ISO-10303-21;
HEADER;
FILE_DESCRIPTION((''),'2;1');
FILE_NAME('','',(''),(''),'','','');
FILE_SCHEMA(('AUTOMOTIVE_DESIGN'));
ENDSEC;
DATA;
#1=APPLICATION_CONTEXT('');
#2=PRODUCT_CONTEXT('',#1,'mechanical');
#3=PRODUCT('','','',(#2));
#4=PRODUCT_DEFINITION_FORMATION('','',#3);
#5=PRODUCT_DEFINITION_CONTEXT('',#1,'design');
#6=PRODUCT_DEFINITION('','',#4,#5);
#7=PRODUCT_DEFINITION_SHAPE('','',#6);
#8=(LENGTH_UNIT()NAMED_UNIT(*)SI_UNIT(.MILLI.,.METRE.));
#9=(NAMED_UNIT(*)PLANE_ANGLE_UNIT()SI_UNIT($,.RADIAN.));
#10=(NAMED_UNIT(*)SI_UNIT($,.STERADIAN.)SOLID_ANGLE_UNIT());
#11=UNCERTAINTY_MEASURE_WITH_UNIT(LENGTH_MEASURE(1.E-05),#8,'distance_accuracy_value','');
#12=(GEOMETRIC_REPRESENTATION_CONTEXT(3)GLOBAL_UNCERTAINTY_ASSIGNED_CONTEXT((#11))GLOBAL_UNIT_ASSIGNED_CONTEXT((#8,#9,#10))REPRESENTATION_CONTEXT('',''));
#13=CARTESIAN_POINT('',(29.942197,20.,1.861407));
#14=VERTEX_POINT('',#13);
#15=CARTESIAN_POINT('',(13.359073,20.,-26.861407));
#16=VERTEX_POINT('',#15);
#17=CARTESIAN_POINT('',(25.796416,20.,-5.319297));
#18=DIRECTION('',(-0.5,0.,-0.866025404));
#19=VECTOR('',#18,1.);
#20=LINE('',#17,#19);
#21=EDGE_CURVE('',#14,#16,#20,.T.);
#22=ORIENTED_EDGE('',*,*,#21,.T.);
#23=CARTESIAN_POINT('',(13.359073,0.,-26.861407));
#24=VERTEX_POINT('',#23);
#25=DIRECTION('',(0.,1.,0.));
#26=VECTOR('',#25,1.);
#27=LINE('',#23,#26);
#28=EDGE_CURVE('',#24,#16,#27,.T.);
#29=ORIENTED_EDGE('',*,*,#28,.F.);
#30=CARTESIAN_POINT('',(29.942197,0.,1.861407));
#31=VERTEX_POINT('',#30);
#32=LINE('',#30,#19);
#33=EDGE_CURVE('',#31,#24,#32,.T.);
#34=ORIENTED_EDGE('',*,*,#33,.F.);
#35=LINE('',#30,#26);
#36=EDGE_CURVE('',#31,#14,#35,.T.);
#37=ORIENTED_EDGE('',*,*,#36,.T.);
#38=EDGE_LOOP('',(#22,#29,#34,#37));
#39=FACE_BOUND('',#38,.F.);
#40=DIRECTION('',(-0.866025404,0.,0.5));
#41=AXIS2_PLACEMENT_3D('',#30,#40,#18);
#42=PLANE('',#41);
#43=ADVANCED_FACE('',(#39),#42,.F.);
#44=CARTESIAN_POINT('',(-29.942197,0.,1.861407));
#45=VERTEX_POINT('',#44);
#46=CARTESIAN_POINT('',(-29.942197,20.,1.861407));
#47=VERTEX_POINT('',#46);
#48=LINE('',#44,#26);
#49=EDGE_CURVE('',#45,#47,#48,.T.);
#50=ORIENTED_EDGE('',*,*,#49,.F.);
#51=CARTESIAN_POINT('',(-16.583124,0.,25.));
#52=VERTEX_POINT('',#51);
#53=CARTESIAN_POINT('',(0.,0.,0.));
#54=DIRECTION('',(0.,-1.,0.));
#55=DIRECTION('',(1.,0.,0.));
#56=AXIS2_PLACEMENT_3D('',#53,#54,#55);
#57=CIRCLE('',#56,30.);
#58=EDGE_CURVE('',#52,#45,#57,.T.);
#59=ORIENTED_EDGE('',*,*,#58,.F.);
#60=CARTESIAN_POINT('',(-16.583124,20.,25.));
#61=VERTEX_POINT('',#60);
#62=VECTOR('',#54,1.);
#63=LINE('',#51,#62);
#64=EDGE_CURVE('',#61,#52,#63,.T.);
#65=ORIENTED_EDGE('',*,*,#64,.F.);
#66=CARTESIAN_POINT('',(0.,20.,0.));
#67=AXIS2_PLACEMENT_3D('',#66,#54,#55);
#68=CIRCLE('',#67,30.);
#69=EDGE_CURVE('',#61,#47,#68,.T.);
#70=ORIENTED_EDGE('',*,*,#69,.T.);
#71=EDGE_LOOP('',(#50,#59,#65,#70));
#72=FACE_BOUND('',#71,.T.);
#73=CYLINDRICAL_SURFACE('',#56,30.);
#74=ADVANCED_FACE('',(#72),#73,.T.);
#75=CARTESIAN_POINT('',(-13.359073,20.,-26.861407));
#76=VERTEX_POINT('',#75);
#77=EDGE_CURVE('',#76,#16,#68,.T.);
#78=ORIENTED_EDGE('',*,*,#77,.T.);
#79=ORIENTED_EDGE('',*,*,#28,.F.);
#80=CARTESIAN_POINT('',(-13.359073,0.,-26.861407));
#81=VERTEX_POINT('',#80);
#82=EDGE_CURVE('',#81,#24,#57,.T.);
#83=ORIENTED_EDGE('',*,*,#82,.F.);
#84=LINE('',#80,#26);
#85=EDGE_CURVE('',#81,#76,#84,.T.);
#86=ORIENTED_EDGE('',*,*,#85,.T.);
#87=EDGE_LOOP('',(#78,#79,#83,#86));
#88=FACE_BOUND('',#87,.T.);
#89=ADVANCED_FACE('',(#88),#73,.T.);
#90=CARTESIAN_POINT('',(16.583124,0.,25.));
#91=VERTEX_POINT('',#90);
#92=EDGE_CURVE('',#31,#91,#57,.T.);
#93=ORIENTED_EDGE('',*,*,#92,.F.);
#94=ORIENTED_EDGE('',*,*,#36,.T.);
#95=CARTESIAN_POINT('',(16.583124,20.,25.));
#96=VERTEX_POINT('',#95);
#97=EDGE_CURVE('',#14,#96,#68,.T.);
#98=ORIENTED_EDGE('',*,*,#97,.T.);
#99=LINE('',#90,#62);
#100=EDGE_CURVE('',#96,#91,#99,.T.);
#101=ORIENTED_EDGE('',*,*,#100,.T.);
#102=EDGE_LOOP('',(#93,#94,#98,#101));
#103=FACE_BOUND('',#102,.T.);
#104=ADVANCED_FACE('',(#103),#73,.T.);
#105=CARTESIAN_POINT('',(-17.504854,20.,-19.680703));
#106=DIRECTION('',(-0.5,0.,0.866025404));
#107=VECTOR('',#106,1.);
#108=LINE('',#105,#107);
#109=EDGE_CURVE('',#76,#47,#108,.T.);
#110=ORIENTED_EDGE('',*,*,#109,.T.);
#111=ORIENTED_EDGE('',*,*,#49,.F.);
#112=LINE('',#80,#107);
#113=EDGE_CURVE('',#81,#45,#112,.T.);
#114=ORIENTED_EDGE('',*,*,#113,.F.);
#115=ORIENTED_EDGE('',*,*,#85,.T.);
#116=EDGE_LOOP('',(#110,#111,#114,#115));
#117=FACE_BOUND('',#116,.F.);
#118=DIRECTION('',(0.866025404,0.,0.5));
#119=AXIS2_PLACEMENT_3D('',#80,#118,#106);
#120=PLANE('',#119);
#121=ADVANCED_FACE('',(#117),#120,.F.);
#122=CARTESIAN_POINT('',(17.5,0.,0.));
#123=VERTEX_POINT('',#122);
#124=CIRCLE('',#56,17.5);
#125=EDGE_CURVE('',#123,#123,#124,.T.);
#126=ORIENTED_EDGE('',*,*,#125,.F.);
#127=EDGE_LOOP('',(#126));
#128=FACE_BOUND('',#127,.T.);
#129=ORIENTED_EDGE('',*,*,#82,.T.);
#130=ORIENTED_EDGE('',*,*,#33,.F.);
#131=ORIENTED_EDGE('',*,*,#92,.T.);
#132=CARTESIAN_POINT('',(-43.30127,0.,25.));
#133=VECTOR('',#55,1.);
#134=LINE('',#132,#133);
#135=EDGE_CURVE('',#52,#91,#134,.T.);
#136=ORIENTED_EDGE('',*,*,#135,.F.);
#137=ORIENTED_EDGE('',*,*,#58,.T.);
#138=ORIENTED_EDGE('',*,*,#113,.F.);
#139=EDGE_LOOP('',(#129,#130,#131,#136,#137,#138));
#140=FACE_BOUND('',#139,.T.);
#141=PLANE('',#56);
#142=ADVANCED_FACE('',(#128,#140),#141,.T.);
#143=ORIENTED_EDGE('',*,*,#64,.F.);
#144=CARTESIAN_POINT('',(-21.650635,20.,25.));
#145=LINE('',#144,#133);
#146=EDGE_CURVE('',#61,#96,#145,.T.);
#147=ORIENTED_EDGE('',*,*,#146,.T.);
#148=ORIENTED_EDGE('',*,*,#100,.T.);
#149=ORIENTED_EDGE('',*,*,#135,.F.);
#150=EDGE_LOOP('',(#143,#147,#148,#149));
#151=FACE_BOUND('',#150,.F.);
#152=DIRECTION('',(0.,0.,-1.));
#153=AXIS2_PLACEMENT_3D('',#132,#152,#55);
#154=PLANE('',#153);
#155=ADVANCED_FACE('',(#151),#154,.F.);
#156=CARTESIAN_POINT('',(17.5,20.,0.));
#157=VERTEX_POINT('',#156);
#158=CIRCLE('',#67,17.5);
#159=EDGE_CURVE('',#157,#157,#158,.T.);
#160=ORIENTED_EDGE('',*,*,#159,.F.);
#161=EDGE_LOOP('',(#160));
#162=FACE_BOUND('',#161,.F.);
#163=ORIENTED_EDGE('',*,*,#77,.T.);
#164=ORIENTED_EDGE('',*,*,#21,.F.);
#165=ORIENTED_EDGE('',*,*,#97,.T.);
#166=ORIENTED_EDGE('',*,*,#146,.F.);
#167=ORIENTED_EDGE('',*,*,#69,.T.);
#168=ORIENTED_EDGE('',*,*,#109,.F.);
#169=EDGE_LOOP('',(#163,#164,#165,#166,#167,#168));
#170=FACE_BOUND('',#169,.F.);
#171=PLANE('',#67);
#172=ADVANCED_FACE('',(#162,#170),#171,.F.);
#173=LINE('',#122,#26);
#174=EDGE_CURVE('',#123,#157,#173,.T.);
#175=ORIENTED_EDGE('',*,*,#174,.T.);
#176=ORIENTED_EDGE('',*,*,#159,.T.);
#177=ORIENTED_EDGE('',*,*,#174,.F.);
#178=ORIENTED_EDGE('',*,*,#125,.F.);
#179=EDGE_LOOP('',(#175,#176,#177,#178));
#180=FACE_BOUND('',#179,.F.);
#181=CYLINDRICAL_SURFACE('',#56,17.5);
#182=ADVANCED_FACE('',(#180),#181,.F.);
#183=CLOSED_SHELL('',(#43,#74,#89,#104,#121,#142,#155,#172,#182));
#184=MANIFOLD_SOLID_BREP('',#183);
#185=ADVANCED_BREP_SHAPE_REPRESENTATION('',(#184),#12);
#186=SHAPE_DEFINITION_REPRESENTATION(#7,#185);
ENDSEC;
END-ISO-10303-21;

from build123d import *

# Parameters (mm, degrees)
F0_R     = 30
F0_R_2   = 17.5
F1_DEPTH = 20
F2_R     = 100
F3_DEPTH = 20.001


with BuildPart() as f1:
    # F0 (on Front) → F1 (new body)
    with BuildSketch(Plane.XZ):
        Circle(F0_R)
        Circle(F0_R_2, mode=Mode.SUBTRACT)
    extrude(amount=-F1_DEPTH)

    # F2 (on face) → F3 (cut, through all)
    with BuildSketch(Plane.XZ):
        Circle(F2_R)
        with BuildLine():
            ThreePointArc((29.9421970705, 1.8614066163), (29.9855457856, 0.9311519438), (30, 0))
            ThreePointArc((30, 0), (25.5026684247, -15.7991741309), (13.3590731187, -26.8614066163))
            Line((13.3590731187, -26.8614066163), (0, -50))
            Line((0, -50), (-13.3590731187, -26.8614066163))
            ThreePointArc((-13.3590731187, -26.8614066163), (-25.9807621135, -15), (-29.9421970705, 1.8614066163))
            Line((-29.9421970705, 1.8614066163), (-43.3012701892, 25))
            Line((-43.3012701892, 25), (-16.5831239518, 25))
            ThreePointArc((-16.5831239518, 25), (0, 30), (16.5831239518, 25))
            Line((16.5831239518, 25), (43.3012701892, 25))
            Line((43.3012701892, 25), (29.9421970705, 1.8614066163))
        make_face(mode=Mode.SUBTRACT)
        with BuildLine():
            Line((-16.5831239518, 25), (16.5831239518, 25))
            ThreePointArc((16.5831239518, 25), (0, 30), (-16.5831239518, 25))
        make_face()
        with BuildLine():
            ThreePointArc((-29.9421970705, 1.8614066163), (-25.9807621135, -15), (-13.3590731187, -26.8614066163))
            Line((-13.3590731187, -26.8614066163), (-29.9421970705, 1.8614066163))
        make_face()
        with BuildLine():
            ThreePointArc((13.3590731187, -26.8614066163), (25.5026684247, -15.7991741309), (30, 0))
            ThreePointArc((30, 0), (29.9855457856, 0.9311519438), (29.9421970705, 1.8614066163))
            Line((29.9421970705, 1.8614066163), (13.3590731187, -26.8614066163))
        make_face()
    extrude(amount=-F3_DEPTH, mode=Mode.SUBTRACT)


solid = f1.part
